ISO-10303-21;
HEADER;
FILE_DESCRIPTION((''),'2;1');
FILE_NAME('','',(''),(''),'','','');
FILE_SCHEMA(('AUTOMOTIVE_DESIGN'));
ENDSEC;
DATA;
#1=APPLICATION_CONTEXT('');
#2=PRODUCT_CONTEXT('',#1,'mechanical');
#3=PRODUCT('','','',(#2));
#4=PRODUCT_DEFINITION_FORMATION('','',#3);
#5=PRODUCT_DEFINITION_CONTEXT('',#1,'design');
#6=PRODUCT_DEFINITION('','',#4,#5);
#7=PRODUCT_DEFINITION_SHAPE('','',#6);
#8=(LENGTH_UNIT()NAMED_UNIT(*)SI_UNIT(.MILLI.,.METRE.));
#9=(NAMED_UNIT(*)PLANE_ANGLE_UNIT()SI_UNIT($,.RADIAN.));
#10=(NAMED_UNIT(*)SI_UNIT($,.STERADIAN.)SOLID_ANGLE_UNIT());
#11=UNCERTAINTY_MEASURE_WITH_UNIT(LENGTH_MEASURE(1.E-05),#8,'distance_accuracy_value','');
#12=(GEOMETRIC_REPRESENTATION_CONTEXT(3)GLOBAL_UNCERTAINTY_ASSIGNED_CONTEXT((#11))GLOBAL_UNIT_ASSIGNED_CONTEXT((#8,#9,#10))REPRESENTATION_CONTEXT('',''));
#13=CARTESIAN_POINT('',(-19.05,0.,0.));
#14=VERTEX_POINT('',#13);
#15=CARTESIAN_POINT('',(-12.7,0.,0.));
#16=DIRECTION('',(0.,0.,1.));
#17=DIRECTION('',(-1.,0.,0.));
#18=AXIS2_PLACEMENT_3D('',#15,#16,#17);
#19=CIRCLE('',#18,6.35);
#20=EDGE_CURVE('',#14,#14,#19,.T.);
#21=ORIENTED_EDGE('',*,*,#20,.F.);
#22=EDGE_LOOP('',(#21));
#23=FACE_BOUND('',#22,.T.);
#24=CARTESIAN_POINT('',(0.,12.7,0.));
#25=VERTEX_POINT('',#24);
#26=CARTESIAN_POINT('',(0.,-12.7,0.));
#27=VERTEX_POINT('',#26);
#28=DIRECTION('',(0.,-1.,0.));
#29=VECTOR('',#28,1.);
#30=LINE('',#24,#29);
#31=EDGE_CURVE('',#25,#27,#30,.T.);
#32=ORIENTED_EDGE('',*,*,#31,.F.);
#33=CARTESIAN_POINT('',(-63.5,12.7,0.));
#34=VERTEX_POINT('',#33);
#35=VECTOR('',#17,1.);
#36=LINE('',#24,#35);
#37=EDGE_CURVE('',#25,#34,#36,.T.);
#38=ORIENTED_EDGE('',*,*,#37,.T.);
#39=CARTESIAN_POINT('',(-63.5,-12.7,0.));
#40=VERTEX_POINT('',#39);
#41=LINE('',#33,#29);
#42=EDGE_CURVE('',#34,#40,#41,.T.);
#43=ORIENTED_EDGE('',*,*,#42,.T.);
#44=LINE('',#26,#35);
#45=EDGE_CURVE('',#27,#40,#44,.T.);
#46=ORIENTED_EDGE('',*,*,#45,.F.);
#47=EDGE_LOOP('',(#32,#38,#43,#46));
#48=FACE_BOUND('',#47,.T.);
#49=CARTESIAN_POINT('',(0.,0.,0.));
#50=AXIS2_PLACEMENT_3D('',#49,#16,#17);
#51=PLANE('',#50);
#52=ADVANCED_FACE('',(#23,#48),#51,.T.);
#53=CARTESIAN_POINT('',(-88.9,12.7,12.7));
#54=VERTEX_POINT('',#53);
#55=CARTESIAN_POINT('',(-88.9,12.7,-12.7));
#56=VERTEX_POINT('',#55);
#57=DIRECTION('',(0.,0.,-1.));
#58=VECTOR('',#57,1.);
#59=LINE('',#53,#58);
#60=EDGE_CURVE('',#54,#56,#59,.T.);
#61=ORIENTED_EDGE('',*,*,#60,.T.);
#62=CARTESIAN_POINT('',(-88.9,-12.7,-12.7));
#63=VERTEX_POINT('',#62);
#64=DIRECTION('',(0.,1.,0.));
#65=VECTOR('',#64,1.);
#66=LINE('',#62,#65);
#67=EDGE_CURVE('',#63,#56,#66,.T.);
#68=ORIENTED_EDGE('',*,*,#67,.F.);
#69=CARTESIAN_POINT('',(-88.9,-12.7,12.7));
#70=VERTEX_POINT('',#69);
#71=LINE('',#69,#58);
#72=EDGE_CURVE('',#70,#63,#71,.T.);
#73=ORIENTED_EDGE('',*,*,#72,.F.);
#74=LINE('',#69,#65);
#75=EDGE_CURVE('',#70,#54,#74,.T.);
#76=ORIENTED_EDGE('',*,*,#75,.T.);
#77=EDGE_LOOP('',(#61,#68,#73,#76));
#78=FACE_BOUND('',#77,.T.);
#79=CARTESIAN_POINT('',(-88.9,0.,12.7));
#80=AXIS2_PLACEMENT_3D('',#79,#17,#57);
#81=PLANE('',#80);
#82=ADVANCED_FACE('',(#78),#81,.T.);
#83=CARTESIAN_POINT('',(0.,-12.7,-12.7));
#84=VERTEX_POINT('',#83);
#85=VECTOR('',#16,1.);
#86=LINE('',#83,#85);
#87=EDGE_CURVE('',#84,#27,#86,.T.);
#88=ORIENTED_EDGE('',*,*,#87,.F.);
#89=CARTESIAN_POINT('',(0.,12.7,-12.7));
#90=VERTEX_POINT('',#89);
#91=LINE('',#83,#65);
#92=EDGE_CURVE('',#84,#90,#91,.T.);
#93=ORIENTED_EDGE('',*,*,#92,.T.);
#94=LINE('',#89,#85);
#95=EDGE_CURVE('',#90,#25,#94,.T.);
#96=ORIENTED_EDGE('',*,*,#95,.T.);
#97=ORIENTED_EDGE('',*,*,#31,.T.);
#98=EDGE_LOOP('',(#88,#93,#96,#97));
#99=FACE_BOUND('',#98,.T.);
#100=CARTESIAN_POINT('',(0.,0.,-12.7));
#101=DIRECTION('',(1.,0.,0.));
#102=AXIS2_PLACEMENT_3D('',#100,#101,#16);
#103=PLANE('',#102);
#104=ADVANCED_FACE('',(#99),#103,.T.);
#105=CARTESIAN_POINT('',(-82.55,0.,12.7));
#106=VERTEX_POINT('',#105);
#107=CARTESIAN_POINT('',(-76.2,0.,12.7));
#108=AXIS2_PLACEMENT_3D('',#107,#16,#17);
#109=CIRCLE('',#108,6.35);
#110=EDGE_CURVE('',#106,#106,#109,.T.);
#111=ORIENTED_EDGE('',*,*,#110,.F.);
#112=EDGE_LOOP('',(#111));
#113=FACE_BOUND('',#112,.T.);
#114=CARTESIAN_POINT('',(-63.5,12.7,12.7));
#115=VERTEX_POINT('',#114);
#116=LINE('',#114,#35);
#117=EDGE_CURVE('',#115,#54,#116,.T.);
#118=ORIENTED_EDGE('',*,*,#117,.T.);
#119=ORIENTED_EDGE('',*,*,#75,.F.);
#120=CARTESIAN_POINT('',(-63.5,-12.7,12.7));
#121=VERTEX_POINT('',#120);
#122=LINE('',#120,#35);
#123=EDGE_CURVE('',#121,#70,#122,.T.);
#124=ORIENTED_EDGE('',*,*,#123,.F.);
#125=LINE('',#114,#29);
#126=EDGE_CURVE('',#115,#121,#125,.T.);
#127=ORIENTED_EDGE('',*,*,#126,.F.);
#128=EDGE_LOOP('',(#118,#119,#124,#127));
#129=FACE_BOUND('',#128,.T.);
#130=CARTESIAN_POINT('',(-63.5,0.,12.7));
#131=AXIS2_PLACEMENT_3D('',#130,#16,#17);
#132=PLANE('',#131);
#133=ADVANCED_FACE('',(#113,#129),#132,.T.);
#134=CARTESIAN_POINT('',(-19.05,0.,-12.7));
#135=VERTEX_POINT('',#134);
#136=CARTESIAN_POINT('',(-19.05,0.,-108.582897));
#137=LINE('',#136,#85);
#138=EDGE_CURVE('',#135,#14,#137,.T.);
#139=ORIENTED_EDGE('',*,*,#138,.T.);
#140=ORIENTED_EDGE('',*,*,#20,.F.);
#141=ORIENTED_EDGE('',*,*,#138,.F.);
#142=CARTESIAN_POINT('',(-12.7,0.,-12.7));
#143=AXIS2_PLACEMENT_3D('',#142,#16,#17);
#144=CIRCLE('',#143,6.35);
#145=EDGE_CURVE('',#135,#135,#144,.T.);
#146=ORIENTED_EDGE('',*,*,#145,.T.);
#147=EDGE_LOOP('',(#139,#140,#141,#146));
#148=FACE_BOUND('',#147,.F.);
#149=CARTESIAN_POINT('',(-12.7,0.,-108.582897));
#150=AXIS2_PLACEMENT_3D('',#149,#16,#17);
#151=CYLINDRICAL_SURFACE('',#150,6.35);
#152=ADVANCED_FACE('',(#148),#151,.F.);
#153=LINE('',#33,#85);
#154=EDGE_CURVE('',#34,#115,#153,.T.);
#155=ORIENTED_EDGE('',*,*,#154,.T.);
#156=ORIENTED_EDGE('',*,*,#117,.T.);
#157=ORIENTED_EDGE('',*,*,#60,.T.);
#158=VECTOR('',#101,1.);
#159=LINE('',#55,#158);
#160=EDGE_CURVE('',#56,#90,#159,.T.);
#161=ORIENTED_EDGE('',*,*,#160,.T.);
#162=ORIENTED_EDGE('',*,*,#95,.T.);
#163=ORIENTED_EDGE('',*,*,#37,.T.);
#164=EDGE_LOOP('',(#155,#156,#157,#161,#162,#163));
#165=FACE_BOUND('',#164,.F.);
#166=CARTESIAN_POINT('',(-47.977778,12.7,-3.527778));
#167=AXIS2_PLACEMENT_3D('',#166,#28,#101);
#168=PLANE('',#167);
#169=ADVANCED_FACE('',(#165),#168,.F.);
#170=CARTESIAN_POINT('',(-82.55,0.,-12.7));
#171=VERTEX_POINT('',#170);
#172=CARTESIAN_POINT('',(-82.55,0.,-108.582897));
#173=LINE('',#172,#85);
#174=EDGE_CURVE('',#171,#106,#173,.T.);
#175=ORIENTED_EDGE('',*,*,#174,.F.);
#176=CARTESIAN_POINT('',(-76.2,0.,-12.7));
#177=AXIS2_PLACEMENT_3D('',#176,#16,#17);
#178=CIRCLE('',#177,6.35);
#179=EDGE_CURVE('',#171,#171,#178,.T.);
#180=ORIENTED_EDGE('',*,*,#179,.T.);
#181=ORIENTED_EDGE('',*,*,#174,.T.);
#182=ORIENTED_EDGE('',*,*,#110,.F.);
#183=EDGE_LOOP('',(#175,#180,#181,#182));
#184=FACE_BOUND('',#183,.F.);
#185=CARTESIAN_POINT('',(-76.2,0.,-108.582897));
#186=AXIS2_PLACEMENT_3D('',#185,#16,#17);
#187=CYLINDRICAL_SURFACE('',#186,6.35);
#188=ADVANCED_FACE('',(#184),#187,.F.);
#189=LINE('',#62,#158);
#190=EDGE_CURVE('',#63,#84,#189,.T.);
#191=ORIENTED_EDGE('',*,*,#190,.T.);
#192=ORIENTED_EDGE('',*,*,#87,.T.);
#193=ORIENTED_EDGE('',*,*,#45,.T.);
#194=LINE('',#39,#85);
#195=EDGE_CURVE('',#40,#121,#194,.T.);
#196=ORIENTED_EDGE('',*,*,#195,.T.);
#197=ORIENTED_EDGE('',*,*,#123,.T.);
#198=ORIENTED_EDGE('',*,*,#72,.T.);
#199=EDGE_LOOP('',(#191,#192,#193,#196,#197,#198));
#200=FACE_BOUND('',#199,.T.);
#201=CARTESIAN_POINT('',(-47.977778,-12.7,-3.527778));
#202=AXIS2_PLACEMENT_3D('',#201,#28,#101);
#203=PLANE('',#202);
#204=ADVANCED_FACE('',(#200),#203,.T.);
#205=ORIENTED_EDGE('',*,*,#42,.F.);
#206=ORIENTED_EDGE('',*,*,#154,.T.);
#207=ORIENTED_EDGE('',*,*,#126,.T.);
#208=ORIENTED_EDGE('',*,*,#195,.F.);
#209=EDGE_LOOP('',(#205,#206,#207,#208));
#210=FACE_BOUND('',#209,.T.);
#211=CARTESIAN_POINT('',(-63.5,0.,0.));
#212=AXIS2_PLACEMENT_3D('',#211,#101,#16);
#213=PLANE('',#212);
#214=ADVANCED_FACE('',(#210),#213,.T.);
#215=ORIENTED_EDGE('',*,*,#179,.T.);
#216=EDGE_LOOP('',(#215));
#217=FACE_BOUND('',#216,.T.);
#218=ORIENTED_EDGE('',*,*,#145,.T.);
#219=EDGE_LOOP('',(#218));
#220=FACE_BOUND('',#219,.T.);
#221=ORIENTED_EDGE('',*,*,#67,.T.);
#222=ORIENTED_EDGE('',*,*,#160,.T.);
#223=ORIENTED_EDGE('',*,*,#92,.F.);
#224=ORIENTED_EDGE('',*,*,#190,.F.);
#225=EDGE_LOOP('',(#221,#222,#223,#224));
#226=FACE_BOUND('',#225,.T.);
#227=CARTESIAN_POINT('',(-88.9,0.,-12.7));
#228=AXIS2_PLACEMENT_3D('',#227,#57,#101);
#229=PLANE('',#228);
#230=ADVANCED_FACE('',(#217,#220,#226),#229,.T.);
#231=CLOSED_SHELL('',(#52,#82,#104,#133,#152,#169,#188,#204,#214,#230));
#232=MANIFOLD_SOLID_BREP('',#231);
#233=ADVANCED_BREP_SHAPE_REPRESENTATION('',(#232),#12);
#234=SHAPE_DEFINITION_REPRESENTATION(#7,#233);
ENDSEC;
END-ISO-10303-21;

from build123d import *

# Parameters (mm, degrees)
F1_DEPTH = 12.7
F3_D     = 12.7


# Not quite as in the source:
# - a length typed as a fraction of an inch, garbled in the dataset ("3 / 203.2 mm" for 3/8 in), is restored


with BuildPart() as f1:
    # F0 (on Front) → F1 (new body, symmetric)
    with BuildSketch(Plane.XZ):
        Polygon((0, -12.7), (0, 0), (-63.5, 0), (-63.5, 12.7), (-88.9, 12.7), (-88.9, -12.7), align=None)
    extrude(amount=F1_DEPTH, both=True)

    # F3 (through all)
    with Locations(Plane(origin=(0, 0, -12.7), x_dir=(1, 0, 0), z_dir=(0, 0, -1))):
        with Locations((-76.2, 0), (-12.7, 0)):
            Hole(F3_D / 2)


solid = f1.part
